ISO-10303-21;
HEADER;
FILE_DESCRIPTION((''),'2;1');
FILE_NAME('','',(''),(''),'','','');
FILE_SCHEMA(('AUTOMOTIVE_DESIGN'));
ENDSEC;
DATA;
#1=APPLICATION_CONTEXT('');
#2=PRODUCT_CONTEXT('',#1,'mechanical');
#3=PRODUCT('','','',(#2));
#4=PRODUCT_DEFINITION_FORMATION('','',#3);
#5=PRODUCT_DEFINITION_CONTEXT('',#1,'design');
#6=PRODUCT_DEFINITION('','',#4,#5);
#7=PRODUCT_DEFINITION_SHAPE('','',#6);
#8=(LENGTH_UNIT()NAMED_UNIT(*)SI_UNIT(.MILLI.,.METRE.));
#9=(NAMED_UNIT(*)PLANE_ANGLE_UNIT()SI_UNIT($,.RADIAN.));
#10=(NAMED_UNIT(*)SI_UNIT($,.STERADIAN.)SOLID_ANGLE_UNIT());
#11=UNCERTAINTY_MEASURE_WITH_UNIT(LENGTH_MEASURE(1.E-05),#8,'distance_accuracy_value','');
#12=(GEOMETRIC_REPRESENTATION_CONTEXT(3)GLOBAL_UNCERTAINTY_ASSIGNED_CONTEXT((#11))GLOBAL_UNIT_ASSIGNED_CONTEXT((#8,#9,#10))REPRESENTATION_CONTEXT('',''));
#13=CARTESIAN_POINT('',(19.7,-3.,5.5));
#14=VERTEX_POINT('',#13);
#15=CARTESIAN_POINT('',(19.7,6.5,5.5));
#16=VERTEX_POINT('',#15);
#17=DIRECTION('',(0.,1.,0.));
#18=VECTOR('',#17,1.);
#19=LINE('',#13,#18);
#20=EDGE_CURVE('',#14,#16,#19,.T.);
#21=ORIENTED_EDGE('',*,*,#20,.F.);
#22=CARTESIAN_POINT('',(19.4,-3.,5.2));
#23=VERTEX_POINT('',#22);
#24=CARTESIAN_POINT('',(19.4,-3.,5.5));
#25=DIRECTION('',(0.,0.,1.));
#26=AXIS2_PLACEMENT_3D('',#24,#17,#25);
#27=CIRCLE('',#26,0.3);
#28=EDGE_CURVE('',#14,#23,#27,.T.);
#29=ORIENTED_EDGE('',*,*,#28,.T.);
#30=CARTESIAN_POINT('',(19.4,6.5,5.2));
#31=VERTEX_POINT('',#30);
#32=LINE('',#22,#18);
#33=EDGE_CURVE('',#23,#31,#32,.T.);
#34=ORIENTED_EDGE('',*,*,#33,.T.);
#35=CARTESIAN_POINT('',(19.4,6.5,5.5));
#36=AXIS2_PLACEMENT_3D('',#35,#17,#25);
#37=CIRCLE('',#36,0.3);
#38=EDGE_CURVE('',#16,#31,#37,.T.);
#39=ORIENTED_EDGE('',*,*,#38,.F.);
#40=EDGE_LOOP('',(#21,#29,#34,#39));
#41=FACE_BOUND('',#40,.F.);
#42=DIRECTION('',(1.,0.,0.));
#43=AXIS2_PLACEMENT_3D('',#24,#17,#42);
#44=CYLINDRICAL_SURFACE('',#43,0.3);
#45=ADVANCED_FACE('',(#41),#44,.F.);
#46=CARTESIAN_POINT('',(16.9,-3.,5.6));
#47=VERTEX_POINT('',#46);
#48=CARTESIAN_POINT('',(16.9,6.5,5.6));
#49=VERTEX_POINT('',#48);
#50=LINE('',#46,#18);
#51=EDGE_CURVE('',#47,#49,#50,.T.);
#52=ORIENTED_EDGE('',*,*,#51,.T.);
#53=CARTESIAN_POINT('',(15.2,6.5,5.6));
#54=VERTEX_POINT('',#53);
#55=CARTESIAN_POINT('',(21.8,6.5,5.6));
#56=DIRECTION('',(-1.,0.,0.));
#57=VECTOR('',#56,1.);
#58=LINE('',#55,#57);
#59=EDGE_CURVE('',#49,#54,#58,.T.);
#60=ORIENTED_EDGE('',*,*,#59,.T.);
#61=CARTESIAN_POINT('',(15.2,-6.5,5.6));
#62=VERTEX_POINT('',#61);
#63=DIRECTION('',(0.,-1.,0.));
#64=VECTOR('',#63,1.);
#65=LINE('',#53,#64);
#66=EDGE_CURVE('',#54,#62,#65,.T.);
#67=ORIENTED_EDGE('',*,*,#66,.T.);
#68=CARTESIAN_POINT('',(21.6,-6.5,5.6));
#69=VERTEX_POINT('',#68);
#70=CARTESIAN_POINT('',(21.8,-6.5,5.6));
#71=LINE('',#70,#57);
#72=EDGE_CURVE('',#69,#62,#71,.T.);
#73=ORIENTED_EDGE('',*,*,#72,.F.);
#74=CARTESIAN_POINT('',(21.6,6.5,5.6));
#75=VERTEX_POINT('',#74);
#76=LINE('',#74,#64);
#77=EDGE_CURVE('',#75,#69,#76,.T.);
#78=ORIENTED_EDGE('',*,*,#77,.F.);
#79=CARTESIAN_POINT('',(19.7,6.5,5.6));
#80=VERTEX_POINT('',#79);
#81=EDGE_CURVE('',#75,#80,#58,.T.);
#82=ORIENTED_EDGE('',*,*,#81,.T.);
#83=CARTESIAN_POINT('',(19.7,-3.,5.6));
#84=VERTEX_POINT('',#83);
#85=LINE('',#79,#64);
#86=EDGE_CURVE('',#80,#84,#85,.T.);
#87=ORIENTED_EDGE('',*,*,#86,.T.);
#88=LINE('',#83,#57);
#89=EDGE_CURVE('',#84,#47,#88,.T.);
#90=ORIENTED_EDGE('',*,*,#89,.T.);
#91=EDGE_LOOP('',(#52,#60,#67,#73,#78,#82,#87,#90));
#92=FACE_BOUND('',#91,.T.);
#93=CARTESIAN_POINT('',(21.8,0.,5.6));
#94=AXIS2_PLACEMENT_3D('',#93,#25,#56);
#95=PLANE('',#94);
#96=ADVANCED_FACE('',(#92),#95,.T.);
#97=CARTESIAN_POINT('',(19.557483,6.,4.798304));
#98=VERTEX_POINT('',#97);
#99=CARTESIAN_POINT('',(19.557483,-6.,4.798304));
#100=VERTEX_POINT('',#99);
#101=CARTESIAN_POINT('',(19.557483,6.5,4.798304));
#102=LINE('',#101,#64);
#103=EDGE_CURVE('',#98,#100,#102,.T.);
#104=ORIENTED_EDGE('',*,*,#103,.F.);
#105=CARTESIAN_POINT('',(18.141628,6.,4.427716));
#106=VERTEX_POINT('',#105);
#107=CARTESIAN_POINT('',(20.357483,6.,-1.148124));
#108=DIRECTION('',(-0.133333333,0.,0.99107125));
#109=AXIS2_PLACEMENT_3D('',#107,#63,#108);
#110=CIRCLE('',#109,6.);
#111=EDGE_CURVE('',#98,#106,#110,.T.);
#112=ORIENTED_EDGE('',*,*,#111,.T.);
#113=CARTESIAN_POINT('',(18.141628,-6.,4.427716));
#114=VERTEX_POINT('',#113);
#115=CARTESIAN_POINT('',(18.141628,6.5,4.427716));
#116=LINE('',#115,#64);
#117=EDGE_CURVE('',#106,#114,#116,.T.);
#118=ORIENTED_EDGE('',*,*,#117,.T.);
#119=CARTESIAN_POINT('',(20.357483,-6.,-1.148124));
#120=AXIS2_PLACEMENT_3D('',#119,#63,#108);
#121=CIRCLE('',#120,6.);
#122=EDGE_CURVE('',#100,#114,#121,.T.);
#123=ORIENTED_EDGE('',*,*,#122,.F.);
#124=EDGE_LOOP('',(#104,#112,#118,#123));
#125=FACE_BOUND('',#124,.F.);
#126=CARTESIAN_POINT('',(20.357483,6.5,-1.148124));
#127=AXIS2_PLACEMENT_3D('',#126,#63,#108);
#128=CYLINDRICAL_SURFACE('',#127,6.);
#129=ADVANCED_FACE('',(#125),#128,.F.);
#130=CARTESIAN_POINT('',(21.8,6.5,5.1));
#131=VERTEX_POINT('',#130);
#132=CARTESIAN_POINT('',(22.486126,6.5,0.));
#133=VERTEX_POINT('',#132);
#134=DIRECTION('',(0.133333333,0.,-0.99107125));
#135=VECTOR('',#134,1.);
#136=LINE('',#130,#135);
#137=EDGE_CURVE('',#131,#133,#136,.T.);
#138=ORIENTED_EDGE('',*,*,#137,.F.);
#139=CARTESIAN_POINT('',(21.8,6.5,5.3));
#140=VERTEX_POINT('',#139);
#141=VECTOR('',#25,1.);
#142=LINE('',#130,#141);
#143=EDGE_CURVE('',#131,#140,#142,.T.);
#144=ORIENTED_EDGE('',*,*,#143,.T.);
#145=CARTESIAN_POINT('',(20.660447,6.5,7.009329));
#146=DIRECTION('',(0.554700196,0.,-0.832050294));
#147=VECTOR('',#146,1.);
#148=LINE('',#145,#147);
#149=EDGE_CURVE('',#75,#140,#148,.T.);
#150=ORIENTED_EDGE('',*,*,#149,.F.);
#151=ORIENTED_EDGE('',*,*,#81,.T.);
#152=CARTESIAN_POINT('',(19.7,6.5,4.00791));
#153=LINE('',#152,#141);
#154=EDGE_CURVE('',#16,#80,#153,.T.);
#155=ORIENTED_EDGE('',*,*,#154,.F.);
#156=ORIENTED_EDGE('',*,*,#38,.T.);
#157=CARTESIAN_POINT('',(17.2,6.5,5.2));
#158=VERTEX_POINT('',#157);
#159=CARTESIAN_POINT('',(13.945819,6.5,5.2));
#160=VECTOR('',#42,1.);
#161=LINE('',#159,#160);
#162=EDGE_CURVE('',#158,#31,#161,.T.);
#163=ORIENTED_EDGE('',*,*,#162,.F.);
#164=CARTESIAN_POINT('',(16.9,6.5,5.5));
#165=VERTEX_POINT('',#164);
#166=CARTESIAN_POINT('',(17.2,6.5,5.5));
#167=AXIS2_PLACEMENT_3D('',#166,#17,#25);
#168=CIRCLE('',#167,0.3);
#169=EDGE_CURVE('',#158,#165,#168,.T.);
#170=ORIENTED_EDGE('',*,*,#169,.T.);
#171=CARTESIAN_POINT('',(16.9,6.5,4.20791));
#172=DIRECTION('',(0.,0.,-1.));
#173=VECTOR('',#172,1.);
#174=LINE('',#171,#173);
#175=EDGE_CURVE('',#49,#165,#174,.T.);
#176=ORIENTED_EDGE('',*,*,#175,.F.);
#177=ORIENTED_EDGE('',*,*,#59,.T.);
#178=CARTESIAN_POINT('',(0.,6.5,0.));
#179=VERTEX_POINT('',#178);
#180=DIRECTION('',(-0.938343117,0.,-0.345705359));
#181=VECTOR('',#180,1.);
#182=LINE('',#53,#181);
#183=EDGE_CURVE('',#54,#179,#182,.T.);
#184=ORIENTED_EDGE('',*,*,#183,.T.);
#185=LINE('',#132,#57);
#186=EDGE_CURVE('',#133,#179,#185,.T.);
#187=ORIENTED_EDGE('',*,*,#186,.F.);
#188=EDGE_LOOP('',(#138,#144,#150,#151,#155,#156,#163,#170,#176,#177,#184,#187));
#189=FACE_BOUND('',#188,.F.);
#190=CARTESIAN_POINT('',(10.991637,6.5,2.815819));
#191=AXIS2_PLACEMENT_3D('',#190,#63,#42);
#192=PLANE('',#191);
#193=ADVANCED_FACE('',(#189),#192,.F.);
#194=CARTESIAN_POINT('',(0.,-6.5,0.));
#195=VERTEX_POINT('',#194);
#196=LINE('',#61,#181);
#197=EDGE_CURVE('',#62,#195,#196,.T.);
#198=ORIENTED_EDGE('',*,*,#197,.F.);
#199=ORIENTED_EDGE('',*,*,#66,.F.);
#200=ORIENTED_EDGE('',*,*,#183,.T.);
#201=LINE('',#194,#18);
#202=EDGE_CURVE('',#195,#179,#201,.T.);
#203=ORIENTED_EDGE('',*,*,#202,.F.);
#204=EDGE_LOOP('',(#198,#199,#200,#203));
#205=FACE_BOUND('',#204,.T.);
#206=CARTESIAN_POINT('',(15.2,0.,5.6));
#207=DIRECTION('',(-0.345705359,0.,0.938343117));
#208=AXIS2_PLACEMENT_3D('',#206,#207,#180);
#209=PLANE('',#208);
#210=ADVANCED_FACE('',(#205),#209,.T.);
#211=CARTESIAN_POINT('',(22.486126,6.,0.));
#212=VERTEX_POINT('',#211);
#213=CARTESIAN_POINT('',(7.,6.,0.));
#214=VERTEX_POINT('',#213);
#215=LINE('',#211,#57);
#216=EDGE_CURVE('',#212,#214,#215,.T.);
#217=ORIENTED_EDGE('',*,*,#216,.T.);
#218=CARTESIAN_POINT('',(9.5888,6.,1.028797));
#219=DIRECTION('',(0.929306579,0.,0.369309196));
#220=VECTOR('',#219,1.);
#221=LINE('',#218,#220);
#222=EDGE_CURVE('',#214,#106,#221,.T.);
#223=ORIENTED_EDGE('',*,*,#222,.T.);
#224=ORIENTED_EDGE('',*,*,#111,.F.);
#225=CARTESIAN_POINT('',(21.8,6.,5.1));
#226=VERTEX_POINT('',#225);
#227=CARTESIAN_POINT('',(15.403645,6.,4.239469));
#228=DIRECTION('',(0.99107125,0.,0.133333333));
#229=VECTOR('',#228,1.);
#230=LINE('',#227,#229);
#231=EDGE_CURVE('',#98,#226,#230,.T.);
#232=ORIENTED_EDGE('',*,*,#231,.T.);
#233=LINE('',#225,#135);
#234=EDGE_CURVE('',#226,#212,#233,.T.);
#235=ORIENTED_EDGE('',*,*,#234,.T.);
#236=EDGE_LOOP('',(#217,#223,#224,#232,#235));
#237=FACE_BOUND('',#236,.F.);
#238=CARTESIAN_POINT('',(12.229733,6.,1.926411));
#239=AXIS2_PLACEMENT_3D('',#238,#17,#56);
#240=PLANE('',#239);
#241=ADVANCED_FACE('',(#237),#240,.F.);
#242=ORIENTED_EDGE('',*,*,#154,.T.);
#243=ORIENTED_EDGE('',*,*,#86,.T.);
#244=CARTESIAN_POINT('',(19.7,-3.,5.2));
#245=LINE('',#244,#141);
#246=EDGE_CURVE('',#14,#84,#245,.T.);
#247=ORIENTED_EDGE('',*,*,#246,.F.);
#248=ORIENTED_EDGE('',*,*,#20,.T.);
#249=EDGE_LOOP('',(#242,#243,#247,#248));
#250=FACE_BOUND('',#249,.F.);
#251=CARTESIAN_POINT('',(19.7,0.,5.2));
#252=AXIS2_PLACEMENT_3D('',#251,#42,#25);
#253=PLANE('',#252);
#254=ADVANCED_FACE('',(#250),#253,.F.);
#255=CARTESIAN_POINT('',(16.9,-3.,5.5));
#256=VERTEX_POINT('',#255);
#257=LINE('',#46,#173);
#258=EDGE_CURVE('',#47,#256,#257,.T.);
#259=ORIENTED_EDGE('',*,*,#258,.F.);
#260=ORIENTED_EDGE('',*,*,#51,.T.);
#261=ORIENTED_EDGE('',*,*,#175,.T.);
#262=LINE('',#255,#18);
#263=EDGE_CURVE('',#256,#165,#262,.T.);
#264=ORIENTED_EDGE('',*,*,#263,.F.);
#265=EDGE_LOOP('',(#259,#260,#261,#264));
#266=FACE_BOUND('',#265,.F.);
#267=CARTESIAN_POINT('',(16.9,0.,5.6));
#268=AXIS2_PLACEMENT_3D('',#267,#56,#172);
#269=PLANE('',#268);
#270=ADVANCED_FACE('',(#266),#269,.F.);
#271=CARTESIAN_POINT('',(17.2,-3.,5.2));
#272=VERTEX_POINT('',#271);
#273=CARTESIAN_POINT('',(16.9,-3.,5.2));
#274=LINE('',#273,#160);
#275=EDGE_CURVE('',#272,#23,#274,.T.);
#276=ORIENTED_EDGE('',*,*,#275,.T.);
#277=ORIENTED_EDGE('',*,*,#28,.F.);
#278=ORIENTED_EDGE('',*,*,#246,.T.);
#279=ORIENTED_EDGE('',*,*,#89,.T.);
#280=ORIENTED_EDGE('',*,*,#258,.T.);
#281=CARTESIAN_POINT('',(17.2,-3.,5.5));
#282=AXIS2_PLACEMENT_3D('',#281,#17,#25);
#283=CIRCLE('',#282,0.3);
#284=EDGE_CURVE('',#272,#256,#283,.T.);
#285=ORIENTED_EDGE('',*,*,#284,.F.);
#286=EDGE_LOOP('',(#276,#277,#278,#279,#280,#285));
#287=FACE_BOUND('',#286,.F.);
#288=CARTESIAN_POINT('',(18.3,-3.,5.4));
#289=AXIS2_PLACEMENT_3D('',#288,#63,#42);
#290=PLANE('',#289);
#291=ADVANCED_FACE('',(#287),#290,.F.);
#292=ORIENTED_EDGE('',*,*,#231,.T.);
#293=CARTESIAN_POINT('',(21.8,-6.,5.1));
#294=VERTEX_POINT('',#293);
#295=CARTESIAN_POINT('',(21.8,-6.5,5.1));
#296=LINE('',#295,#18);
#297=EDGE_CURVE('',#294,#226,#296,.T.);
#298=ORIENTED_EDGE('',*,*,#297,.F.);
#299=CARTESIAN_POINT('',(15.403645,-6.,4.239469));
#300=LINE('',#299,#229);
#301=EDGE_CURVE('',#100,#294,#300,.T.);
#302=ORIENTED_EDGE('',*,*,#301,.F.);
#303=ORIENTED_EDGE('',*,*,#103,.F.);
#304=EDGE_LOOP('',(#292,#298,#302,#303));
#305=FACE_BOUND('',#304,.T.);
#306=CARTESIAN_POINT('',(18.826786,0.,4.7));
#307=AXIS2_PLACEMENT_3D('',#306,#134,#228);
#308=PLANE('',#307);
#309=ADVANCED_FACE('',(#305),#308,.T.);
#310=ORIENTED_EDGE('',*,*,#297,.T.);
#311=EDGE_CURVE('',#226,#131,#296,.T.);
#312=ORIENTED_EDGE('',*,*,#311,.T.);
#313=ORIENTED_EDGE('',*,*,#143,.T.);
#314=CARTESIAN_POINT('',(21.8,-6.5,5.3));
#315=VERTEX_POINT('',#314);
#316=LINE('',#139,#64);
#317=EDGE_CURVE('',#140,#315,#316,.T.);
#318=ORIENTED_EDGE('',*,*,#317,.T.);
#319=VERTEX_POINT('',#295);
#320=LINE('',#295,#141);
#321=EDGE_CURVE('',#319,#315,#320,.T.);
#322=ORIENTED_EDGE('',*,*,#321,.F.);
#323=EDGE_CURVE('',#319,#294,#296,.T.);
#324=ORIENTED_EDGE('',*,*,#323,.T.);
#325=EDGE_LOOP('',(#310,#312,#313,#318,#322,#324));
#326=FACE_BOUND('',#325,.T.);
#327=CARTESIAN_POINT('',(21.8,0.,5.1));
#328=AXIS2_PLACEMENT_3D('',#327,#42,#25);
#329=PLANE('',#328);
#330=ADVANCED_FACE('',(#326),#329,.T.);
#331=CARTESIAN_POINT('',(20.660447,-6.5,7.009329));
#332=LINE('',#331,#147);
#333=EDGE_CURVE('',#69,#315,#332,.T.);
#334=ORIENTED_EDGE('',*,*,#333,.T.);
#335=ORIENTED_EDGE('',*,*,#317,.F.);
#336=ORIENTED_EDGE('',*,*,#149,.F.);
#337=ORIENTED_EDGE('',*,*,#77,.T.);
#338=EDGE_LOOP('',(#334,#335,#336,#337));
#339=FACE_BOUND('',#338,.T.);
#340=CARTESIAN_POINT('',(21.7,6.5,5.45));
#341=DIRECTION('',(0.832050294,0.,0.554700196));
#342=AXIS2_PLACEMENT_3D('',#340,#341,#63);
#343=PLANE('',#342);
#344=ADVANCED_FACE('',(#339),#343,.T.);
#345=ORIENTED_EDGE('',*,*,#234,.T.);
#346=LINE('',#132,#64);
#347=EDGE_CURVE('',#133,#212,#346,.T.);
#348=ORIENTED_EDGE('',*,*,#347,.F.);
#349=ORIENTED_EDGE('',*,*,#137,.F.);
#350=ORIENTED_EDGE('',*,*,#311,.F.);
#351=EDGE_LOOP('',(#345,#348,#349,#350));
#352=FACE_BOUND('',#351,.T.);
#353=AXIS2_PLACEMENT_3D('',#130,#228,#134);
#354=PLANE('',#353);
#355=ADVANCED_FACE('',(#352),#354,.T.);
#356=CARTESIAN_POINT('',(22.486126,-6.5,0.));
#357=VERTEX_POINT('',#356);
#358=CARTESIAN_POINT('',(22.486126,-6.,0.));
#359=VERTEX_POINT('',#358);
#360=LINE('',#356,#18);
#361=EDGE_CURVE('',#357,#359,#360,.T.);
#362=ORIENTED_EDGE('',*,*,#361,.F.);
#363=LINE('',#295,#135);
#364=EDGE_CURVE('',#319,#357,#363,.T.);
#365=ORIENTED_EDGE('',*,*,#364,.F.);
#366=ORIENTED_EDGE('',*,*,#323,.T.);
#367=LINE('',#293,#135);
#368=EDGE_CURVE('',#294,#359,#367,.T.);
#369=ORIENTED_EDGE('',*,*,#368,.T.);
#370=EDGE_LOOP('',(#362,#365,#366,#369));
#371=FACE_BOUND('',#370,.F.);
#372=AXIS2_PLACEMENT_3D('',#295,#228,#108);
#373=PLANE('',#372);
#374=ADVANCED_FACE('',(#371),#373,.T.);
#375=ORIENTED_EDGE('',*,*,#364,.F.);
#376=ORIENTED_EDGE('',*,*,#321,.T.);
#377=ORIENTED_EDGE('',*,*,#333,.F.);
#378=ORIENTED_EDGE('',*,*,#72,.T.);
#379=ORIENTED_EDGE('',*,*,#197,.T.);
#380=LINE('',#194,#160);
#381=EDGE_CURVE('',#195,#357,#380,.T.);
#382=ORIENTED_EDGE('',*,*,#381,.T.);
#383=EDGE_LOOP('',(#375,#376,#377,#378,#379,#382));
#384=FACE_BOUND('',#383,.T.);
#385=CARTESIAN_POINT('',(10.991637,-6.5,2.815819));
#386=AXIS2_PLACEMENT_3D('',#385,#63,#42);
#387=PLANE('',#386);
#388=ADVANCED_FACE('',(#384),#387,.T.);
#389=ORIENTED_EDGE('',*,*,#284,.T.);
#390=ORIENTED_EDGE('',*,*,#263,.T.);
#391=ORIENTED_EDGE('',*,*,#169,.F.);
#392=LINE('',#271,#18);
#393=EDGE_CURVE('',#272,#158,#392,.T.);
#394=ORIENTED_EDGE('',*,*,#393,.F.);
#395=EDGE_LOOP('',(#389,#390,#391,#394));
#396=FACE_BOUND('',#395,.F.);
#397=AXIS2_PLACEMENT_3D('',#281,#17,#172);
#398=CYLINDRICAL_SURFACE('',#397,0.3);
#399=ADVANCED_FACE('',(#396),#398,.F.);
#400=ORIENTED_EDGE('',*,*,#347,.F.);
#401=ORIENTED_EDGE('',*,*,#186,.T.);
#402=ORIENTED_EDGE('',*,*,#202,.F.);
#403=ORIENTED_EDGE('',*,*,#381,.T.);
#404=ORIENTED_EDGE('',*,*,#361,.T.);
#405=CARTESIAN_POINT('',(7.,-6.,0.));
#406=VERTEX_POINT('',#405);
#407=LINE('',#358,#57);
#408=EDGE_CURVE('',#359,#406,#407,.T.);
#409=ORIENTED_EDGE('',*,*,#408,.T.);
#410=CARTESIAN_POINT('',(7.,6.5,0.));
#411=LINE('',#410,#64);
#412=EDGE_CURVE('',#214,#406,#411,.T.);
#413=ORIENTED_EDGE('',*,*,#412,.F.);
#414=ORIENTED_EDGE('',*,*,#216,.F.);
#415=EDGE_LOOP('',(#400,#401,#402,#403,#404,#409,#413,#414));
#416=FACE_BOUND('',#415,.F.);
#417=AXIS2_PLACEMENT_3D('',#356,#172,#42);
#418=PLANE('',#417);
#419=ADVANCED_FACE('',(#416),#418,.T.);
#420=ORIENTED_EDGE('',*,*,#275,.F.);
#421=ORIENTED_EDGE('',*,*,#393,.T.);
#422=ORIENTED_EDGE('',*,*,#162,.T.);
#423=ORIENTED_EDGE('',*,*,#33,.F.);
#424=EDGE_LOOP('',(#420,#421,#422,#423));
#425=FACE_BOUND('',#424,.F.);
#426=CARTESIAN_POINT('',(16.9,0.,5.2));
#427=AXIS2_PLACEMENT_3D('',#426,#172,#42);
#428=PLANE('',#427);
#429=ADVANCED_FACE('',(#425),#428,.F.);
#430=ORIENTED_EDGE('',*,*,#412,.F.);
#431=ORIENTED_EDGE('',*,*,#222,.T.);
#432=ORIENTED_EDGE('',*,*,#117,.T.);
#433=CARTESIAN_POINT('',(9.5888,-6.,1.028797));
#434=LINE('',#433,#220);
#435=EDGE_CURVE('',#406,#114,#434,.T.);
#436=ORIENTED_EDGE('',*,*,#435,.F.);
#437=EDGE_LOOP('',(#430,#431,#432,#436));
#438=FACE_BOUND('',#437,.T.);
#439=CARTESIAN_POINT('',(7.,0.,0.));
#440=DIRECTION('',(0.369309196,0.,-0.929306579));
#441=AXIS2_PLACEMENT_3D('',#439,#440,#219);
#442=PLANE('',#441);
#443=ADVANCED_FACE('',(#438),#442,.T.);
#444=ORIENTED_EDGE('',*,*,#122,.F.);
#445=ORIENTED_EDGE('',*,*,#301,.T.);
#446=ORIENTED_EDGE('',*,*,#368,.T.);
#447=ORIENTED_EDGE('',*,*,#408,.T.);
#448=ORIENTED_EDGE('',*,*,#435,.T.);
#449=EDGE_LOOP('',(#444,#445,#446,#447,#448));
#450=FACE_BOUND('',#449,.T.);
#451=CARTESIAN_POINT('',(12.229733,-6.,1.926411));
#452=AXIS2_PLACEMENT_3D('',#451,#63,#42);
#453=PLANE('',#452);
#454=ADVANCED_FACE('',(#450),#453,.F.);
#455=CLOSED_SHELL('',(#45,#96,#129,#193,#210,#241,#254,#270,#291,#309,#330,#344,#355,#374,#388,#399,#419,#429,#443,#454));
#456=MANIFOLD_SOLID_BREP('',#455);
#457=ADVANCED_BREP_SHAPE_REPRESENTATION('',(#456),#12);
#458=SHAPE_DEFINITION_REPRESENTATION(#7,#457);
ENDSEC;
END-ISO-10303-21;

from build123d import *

# Parameters (mm, degrees)
F1_DEPTH      = 6.5
F2_R          = 6
F4_DEPTH      = 0.5
F6_DEPTH      = 3
F6_DEPTH_BACK = 25
F7_SIZE2      = 0.3
F7_SIZE       = 0.2
F8_R          = 0.3


# Not quite as in the source:
# - a pattern or mirror of a feature is missing from the dataset's text; its kind, count and spacing are read off the source's solid


with BuildPart() as f1:
    # F0 (on Front) → F1 (new body, symmetric)
    with BuildSketch(Plane.XZ):
        Polygon((15.2, 5.6), (0, 0), (7, 0), (18.8267862505, 4.7), (21.8, 5.1), (21.8, 5.6), align=None)
    extrude(amount=F1_DEPTH, both=True)

    # F2
    f2_edges = [f1.edges().sort_by_distance(p)[0] for p in [
        (18.826786, 0, 4.7),
    ]]
    fillet(f2_edges, radius=F2_R)

    # F3 (on face) → F4 (join)
    with BuildSketch(Plane(origin=(0, 6.5, 0), x_dir=(-1, 0, 0), z_dir=(0, 1, 0))):
        Polygon((-21.8, 5.6), (-21.8, 5.1), (-22.4861262499, 0), (0, 0), (-15.2, 5.6), align=None)
    f4 = extrude(amount=-F4_DEPTH)

    # F4_copies: F4 across plane
    add(f4.mirror(Plane(origin=(0, 0, 0), x_dir=(0, 0, -1), z_dir=(0, -1, 0))))

    # F5 (on Front) → F6 (cut, two sides)
    with BuildSketch(Plane.XZ) as f6_sk:
        Polygon((18.3, 5.6), (16.9, 5.6), (16.9, 5.2), (19.7, 5.2), (19.7, 5.6), align=None)
    extrude(amount=F6_DEPTH, mode=Mode.SUBTRACT)
    extrude(f6_sk.sketch, amount=-F6_DEPTH_BACK, mode=Mode.SUBTRACT)

    # F7
    f7_edges = [f1.edges().sort_by_distance(p)[0] for p in [
        (21.8, 0, 5.6),
    ]]
    f7_side = f1.faces().sort_by_distance((21.654206, 0, 5.6))[0]
    chamfer(f7_edges, length=F7_SIZE, length2=F7_SIZE2, reference=f7_side)

    # F8
    f8_edges = [f1.edges().sort_by_distance(p)[0] for p in [
        (16.9, 1.75, 5.2),
        (19.7, 1.75, 5.2),
    ]]
    fillet(f8_edges, radius=F8_R)


solid = f1.part
